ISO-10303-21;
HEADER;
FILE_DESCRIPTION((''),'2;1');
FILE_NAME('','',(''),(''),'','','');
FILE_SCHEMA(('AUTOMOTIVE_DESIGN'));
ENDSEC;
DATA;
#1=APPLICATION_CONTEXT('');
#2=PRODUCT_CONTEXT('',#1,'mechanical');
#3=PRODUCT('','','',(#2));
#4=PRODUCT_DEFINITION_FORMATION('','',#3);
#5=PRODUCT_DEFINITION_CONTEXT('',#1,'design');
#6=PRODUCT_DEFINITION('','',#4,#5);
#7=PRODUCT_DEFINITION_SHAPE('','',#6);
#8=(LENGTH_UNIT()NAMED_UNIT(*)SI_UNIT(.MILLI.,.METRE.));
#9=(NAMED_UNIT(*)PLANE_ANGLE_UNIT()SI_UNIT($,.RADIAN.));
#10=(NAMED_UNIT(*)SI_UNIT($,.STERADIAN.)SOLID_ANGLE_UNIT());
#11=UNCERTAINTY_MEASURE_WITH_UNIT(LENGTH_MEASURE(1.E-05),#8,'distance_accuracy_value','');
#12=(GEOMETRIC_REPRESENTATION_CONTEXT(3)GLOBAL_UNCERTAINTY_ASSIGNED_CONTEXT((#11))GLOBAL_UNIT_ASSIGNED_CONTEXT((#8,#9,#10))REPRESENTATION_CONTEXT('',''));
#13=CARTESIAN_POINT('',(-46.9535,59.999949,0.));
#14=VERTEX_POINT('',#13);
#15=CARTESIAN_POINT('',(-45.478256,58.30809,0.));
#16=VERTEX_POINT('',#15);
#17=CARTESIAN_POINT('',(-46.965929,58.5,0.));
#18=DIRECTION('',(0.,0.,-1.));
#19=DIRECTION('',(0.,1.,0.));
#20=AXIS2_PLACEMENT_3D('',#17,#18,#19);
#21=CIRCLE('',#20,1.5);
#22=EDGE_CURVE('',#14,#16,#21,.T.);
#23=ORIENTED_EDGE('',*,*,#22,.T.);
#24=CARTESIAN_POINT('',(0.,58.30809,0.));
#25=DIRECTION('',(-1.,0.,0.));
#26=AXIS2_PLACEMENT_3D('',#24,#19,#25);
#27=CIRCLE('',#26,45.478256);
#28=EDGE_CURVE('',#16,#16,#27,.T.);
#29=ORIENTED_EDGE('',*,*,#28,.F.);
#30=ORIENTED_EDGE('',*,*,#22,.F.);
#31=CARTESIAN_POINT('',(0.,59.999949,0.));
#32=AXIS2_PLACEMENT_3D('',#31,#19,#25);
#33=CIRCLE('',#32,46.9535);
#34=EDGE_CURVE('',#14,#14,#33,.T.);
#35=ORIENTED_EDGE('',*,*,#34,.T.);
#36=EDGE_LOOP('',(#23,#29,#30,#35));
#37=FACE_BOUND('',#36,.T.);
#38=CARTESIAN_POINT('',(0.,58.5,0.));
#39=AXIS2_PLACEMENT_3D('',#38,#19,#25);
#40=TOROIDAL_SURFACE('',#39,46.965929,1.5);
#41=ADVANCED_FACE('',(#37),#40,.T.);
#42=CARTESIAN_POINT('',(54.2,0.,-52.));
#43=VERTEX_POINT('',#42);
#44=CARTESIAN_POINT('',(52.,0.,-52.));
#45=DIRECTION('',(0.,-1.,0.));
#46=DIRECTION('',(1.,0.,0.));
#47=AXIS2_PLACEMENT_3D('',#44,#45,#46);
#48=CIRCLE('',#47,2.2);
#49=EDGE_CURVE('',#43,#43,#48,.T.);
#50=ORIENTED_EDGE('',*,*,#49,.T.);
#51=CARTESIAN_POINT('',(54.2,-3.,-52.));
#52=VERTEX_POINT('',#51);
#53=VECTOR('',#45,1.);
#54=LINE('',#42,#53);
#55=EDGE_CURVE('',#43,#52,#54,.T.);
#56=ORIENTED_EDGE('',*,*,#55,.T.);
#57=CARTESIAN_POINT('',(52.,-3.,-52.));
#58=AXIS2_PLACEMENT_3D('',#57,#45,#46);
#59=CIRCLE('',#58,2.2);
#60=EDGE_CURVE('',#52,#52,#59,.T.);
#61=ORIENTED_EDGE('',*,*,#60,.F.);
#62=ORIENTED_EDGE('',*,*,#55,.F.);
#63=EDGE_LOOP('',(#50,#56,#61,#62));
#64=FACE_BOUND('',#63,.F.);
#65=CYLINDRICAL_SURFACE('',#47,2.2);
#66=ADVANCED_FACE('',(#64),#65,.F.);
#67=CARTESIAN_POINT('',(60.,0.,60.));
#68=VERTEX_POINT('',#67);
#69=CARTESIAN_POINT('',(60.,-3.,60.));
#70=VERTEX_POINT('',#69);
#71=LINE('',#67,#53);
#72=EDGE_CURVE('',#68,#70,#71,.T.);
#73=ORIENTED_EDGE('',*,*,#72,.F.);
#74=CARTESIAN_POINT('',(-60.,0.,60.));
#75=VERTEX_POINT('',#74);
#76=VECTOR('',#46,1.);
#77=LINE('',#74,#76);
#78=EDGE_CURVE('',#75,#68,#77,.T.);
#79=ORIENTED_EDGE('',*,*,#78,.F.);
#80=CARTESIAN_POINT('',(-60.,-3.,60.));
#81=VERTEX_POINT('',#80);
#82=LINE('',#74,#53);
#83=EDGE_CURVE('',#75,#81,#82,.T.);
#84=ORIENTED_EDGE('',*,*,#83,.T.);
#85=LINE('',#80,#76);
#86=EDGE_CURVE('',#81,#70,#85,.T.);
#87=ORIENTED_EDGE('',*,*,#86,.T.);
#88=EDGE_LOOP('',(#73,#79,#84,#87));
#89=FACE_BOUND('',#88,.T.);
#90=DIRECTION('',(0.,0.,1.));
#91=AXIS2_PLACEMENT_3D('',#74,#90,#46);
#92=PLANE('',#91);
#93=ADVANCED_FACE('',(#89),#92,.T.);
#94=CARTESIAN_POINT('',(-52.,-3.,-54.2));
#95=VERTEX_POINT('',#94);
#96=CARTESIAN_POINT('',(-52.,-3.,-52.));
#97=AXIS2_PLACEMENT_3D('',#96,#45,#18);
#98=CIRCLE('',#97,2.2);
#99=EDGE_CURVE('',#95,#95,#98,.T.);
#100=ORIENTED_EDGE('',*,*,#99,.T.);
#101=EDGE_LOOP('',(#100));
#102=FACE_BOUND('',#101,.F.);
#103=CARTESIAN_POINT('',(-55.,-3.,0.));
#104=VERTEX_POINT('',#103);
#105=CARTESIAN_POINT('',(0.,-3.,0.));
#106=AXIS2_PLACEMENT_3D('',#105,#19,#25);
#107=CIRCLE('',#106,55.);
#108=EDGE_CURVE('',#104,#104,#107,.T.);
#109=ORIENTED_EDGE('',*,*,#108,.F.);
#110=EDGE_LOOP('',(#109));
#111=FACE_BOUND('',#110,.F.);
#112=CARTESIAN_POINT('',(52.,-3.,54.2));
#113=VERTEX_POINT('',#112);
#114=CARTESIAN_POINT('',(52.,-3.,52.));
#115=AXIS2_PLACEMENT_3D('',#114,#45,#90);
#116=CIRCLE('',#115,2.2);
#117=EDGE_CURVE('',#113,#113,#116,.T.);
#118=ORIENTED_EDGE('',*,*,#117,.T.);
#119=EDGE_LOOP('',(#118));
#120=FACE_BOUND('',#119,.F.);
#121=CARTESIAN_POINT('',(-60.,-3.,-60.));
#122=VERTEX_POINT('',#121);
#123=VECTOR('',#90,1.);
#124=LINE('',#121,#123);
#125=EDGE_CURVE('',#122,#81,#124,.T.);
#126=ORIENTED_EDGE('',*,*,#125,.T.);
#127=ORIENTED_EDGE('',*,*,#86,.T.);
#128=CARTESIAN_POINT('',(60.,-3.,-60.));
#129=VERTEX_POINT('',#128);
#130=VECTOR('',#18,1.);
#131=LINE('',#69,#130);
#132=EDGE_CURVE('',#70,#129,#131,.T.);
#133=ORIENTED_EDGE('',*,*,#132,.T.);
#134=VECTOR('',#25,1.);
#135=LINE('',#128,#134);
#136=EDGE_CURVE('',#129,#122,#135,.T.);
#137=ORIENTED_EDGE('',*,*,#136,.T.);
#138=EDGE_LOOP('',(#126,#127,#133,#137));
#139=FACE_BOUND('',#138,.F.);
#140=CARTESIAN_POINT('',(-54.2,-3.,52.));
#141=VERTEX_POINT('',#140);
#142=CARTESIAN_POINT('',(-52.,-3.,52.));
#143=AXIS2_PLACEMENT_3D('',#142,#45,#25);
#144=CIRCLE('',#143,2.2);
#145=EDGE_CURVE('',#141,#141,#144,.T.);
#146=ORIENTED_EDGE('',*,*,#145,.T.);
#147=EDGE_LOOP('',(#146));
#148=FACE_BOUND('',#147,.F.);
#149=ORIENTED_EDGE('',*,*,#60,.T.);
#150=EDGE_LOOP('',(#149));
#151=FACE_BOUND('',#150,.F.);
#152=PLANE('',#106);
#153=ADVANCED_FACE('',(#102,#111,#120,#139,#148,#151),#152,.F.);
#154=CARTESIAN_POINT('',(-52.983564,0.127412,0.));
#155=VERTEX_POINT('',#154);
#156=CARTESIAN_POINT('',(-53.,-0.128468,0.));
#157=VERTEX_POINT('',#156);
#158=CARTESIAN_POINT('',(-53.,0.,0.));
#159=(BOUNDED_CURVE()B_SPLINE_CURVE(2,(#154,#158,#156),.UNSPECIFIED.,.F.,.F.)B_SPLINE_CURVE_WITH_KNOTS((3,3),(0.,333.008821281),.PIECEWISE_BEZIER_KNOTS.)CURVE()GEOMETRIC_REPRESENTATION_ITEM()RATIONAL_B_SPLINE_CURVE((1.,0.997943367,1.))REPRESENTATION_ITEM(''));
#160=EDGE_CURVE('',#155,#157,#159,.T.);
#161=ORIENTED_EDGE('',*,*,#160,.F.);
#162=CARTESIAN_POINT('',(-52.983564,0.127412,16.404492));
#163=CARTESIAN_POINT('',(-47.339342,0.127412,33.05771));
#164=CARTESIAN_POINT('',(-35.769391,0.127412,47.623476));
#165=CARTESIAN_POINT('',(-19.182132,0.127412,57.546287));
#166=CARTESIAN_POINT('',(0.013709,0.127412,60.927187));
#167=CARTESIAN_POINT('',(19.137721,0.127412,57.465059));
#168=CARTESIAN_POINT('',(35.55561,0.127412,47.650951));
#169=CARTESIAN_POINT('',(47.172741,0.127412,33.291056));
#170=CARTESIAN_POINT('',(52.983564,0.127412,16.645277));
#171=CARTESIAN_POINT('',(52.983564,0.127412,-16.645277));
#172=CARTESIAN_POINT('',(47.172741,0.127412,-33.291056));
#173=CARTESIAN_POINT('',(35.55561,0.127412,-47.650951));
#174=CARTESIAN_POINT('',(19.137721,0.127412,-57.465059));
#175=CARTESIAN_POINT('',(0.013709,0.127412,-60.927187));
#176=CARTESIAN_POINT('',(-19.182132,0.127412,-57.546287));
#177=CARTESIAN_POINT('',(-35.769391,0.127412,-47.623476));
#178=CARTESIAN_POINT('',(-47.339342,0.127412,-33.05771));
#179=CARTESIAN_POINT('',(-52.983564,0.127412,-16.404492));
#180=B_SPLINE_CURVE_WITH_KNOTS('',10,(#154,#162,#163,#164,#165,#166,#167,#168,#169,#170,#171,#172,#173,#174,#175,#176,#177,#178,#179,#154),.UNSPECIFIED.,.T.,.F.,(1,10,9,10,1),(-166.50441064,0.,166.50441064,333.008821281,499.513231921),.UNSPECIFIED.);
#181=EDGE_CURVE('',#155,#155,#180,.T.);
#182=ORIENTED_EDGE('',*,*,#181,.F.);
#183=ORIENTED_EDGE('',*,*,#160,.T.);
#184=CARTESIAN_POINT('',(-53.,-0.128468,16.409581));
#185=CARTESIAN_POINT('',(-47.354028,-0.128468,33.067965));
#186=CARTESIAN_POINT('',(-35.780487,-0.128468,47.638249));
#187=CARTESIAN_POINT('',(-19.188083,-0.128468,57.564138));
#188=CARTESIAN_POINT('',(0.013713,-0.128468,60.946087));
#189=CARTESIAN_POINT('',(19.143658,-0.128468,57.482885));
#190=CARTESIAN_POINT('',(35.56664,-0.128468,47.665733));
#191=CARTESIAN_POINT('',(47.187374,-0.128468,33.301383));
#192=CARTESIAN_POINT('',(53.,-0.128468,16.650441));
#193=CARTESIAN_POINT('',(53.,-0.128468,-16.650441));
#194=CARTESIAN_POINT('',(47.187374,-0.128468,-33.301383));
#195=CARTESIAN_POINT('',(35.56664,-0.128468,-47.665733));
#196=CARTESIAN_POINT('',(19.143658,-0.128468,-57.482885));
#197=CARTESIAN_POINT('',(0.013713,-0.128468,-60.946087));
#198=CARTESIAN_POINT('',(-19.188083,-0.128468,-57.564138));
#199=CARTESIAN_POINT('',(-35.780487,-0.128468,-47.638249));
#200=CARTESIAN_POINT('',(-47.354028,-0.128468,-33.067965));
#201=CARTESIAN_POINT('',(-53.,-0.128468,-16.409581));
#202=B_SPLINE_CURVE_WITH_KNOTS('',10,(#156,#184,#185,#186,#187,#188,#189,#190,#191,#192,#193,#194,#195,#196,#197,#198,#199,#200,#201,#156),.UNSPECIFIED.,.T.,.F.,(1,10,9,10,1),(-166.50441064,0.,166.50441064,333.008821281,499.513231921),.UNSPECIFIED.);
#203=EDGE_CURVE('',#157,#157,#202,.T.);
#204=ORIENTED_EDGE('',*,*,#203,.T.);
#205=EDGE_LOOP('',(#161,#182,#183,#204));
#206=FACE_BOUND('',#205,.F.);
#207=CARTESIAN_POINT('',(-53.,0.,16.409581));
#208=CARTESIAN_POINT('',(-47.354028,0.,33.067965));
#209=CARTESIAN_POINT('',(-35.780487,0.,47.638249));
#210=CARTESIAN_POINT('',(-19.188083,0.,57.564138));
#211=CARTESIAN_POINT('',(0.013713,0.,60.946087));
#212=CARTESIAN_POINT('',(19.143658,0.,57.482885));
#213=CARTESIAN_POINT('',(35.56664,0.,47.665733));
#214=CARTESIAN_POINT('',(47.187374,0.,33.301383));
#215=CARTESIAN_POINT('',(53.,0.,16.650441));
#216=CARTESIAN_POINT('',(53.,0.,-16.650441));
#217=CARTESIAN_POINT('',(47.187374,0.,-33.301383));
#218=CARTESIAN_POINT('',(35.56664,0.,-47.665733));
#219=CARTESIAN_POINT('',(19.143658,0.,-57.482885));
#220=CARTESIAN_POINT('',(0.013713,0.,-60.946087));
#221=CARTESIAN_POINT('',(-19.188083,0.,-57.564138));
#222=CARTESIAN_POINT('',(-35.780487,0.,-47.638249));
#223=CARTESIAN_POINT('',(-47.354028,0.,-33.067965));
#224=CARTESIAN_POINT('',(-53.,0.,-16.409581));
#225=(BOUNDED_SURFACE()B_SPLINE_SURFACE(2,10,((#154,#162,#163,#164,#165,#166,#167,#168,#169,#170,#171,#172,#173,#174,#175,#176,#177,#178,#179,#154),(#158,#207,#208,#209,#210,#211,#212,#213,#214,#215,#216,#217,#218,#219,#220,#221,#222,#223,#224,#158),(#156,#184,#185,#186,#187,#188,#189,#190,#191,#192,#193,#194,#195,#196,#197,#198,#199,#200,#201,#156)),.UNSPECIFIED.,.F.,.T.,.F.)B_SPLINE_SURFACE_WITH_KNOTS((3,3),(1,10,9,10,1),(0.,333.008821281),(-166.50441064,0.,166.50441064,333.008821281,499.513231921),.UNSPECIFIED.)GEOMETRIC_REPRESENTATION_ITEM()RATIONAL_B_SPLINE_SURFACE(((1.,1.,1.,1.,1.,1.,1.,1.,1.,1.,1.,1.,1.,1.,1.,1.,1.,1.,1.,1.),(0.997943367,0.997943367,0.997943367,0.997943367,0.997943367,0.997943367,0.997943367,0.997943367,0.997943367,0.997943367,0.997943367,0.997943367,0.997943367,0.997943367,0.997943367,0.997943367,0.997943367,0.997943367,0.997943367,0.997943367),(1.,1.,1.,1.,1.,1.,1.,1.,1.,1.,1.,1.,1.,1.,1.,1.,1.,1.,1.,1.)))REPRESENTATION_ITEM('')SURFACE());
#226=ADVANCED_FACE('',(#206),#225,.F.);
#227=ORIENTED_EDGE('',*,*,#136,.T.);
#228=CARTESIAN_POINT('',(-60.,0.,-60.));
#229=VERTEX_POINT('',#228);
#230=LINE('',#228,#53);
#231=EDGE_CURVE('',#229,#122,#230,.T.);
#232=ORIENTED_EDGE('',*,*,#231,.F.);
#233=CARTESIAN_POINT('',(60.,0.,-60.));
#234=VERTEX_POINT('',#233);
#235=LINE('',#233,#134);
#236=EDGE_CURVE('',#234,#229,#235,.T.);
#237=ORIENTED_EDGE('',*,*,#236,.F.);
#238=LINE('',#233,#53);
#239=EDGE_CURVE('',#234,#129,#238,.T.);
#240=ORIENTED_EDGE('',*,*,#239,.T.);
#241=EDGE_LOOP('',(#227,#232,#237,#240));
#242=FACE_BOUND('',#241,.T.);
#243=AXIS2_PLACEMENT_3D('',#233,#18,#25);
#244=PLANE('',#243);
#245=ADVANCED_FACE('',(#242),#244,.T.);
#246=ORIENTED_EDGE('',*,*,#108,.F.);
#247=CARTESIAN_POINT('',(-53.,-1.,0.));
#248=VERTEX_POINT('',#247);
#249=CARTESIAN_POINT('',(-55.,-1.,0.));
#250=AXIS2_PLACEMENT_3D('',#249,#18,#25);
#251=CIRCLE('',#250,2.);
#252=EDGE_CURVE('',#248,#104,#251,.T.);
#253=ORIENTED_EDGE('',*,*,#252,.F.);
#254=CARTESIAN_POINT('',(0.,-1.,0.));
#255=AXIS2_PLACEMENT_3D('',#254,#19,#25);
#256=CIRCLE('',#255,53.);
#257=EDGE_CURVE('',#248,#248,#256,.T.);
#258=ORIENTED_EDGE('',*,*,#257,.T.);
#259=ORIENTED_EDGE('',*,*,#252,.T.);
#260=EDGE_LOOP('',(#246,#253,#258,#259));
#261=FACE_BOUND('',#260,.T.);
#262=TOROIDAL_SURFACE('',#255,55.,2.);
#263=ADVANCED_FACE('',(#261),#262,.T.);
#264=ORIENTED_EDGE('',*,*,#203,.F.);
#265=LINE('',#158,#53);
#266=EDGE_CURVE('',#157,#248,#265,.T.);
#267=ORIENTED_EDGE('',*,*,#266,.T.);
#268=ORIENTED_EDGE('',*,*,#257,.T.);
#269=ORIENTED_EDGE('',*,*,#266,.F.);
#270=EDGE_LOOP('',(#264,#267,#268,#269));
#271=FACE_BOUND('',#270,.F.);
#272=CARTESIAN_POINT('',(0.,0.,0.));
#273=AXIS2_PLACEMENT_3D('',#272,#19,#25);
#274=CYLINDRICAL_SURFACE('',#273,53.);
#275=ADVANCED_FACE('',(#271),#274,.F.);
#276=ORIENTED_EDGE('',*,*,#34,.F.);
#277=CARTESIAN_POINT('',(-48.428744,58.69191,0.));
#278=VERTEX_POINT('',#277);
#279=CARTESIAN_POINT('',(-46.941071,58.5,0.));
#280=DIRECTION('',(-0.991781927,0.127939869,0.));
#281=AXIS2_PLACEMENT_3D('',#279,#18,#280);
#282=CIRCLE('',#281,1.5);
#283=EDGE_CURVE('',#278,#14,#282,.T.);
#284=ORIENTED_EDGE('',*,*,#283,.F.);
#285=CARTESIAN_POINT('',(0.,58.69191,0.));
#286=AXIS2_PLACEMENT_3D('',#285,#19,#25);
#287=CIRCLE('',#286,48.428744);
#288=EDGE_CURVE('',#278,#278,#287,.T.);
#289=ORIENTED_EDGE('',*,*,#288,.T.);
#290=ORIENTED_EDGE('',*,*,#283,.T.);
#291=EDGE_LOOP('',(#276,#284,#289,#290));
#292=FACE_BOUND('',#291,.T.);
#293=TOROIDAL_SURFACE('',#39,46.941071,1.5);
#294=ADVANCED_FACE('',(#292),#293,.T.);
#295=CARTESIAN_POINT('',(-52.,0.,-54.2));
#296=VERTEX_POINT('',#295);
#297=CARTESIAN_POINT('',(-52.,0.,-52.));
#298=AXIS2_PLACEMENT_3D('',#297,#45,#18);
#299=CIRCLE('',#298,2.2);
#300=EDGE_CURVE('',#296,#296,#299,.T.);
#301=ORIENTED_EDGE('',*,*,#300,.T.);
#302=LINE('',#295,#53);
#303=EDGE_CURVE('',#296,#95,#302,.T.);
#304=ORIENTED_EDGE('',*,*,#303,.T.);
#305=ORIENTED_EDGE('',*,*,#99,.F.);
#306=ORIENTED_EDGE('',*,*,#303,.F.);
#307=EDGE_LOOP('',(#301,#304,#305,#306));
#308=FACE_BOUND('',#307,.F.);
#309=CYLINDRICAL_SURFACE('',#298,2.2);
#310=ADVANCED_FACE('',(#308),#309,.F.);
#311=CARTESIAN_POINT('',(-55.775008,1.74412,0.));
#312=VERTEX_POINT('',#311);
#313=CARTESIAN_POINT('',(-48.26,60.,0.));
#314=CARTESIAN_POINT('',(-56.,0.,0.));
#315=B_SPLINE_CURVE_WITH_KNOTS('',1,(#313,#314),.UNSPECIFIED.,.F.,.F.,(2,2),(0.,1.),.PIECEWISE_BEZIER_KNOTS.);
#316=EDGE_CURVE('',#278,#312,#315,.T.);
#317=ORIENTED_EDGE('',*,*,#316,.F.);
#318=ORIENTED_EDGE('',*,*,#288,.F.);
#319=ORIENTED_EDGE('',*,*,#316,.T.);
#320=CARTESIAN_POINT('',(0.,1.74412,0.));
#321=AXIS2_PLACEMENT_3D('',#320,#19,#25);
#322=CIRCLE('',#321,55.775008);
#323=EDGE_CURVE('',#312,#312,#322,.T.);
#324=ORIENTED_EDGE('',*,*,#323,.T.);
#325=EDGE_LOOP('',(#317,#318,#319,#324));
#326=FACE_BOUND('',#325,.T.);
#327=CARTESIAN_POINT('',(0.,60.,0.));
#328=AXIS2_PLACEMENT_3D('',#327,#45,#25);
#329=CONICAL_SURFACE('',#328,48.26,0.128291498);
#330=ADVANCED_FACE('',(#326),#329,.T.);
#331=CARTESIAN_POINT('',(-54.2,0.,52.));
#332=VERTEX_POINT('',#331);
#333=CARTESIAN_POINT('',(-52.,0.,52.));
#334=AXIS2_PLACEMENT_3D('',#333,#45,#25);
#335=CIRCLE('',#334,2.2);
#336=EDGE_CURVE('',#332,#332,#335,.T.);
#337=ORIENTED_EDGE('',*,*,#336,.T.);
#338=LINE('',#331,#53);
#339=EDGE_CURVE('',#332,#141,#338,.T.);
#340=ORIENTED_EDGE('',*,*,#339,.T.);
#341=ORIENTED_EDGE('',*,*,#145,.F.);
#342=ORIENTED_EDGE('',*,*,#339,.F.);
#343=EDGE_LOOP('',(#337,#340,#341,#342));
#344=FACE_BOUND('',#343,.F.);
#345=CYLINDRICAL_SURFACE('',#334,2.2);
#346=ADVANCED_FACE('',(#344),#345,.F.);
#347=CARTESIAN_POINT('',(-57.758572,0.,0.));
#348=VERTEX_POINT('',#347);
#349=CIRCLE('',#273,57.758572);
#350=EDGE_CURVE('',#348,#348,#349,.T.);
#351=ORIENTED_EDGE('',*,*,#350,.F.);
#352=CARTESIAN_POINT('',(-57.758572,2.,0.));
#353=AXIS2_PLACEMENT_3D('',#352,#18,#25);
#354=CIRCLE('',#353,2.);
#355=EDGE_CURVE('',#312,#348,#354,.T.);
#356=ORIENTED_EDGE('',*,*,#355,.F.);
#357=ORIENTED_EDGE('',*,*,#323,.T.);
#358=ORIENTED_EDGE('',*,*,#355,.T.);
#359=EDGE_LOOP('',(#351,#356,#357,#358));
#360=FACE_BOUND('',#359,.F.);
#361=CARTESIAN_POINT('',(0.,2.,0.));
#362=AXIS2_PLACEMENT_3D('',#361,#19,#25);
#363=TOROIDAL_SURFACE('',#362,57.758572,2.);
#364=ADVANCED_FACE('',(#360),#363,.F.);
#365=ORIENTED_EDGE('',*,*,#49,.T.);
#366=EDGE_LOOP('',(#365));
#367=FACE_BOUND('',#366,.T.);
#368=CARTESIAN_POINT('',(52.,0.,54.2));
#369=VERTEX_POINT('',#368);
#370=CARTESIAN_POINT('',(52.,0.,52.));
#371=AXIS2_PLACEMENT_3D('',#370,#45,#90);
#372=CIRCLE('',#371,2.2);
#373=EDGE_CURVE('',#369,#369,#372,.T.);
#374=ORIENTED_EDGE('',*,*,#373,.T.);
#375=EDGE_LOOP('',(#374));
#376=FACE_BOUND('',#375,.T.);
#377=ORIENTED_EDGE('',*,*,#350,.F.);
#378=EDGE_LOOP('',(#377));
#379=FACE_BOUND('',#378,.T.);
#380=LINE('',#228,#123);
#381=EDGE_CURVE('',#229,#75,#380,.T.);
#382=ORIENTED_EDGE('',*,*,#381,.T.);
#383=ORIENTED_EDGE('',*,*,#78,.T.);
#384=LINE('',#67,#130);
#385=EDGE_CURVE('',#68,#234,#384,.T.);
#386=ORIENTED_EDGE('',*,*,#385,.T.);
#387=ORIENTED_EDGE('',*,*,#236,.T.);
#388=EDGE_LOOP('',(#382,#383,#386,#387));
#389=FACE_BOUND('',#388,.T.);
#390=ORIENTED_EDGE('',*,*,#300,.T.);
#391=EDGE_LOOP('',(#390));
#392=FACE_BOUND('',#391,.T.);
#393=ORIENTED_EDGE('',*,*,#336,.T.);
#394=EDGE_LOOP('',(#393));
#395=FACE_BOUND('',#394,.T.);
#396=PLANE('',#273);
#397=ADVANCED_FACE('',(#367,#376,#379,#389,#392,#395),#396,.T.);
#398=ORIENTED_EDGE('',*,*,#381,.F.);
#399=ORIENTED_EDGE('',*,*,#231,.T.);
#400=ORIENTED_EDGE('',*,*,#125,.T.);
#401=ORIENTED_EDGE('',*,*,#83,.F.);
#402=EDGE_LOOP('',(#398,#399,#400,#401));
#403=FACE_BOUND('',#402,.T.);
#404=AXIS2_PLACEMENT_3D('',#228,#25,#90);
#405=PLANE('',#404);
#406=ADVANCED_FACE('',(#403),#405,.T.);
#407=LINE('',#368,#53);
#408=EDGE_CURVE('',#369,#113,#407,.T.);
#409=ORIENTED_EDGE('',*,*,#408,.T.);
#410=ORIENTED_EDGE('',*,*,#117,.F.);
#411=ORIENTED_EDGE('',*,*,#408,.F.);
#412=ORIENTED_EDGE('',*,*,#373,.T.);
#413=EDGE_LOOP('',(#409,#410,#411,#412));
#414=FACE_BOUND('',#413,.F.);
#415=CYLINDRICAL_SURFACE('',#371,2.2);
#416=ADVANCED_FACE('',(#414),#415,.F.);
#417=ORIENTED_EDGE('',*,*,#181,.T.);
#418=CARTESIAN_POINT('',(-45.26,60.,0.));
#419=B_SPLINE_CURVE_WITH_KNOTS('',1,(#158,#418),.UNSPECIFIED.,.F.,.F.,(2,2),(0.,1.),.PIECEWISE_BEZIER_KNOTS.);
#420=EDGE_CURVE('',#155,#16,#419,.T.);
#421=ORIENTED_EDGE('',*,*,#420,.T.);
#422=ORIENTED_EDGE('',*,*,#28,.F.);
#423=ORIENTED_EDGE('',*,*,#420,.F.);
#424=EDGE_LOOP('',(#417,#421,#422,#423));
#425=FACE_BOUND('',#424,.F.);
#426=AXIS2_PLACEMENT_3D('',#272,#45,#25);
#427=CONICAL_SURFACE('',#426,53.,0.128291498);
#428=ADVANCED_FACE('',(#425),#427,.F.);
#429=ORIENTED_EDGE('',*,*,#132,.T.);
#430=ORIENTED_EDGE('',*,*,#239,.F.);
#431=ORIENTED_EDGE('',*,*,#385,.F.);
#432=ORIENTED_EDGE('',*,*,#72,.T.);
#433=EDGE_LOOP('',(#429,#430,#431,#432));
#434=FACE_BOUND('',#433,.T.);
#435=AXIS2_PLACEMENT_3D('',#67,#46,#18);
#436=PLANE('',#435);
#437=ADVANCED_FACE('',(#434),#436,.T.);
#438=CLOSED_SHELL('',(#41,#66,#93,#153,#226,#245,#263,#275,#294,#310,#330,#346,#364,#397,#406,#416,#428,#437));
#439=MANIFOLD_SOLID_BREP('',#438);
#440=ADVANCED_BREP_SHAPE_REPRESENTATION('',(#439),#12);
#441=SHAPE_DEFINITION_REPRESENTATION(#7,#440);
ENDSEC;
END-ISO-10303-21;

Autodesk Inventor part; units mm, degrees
ref_plane "YZ Plane" through (0, 0, 0) normal (1, 0, 0) x (0, 1, 0)
ref_plane "XY Plane" through (0, 0, 0) normal (0, 0, 1) x (1, 0, 0)
sketch "Sketch1" plane through (0, 0, 0) normal (0, 1, 0) x (-1, 0, 0)
  line L0 (-60, -60) -> (60, -60)
  line L1 (60, -60) -> (60, 60)
  line L2 (60, 60) -> (-60, 60)
  line L3 (-60, 60) -> (-60, -60)
  line L4 (-60, -60) -> (60, 60) construction
  line L5 (60, -60) -> (-60, 60) construction
  circle A0 centre (0, 0) radius 56
  line L6 (0, 60) -> (0, 0) construction
  circle A1 centre (0, 0) radius 53
  point P0 (-52, 52)
  dimension "d0" = 120
  dimension "d1" = 120
  dimension "d2" = 112
  dimension "d4" = 104
  dimension "d29" = 3
extrude "Extrusion1" add sketch "Sketch1" against normal blind 3 contours L3 L2 L1 L0 | A0
hole "Hole1" at (52, 0, 52) direction (0, -1, 0) diameter 4.4 end through all
pattern_circular "Circular Pattern1" count 4 over 360 about axis through (0, -10, 0) along (0, 1, 0) of "Hole1"
ref_plane "Work Plane1" through (0, 60, 0) normal (0, 1, 0) x (-1, 0, 0)
sketch "Sketch3" plane through (0, 60, 0) normal (0, 1, 0) x (-1, 0, 0)
  circle A0 centre (0, 0) radius 48.26
  circle A1 centre (0, 0) radius 45.26
  dimension "d21" = 96.52
  dimension "WallThickness" = 3
loft "Loft1" add profiles "Sketch3", "Sketch1" contours A0 | A1 / A0 | A1
loft "Loft2" cut profiles "Sketch1", "Sketch3" contours A1 / A1
fillet "Fillet1" radius 2 3 edges at (56, 0, 0) (53, 0, 0) (53, -3, 0)
fillet "Fillet2" radius 1.5 2 edges at (48.26, 60, 0) (45.26, 60, 0)
equation "\"d29\" = WallThickness"
equation "\"d36\" = 0.5 * WallThickness"
properties part number "120mm-4in duct adapter"
